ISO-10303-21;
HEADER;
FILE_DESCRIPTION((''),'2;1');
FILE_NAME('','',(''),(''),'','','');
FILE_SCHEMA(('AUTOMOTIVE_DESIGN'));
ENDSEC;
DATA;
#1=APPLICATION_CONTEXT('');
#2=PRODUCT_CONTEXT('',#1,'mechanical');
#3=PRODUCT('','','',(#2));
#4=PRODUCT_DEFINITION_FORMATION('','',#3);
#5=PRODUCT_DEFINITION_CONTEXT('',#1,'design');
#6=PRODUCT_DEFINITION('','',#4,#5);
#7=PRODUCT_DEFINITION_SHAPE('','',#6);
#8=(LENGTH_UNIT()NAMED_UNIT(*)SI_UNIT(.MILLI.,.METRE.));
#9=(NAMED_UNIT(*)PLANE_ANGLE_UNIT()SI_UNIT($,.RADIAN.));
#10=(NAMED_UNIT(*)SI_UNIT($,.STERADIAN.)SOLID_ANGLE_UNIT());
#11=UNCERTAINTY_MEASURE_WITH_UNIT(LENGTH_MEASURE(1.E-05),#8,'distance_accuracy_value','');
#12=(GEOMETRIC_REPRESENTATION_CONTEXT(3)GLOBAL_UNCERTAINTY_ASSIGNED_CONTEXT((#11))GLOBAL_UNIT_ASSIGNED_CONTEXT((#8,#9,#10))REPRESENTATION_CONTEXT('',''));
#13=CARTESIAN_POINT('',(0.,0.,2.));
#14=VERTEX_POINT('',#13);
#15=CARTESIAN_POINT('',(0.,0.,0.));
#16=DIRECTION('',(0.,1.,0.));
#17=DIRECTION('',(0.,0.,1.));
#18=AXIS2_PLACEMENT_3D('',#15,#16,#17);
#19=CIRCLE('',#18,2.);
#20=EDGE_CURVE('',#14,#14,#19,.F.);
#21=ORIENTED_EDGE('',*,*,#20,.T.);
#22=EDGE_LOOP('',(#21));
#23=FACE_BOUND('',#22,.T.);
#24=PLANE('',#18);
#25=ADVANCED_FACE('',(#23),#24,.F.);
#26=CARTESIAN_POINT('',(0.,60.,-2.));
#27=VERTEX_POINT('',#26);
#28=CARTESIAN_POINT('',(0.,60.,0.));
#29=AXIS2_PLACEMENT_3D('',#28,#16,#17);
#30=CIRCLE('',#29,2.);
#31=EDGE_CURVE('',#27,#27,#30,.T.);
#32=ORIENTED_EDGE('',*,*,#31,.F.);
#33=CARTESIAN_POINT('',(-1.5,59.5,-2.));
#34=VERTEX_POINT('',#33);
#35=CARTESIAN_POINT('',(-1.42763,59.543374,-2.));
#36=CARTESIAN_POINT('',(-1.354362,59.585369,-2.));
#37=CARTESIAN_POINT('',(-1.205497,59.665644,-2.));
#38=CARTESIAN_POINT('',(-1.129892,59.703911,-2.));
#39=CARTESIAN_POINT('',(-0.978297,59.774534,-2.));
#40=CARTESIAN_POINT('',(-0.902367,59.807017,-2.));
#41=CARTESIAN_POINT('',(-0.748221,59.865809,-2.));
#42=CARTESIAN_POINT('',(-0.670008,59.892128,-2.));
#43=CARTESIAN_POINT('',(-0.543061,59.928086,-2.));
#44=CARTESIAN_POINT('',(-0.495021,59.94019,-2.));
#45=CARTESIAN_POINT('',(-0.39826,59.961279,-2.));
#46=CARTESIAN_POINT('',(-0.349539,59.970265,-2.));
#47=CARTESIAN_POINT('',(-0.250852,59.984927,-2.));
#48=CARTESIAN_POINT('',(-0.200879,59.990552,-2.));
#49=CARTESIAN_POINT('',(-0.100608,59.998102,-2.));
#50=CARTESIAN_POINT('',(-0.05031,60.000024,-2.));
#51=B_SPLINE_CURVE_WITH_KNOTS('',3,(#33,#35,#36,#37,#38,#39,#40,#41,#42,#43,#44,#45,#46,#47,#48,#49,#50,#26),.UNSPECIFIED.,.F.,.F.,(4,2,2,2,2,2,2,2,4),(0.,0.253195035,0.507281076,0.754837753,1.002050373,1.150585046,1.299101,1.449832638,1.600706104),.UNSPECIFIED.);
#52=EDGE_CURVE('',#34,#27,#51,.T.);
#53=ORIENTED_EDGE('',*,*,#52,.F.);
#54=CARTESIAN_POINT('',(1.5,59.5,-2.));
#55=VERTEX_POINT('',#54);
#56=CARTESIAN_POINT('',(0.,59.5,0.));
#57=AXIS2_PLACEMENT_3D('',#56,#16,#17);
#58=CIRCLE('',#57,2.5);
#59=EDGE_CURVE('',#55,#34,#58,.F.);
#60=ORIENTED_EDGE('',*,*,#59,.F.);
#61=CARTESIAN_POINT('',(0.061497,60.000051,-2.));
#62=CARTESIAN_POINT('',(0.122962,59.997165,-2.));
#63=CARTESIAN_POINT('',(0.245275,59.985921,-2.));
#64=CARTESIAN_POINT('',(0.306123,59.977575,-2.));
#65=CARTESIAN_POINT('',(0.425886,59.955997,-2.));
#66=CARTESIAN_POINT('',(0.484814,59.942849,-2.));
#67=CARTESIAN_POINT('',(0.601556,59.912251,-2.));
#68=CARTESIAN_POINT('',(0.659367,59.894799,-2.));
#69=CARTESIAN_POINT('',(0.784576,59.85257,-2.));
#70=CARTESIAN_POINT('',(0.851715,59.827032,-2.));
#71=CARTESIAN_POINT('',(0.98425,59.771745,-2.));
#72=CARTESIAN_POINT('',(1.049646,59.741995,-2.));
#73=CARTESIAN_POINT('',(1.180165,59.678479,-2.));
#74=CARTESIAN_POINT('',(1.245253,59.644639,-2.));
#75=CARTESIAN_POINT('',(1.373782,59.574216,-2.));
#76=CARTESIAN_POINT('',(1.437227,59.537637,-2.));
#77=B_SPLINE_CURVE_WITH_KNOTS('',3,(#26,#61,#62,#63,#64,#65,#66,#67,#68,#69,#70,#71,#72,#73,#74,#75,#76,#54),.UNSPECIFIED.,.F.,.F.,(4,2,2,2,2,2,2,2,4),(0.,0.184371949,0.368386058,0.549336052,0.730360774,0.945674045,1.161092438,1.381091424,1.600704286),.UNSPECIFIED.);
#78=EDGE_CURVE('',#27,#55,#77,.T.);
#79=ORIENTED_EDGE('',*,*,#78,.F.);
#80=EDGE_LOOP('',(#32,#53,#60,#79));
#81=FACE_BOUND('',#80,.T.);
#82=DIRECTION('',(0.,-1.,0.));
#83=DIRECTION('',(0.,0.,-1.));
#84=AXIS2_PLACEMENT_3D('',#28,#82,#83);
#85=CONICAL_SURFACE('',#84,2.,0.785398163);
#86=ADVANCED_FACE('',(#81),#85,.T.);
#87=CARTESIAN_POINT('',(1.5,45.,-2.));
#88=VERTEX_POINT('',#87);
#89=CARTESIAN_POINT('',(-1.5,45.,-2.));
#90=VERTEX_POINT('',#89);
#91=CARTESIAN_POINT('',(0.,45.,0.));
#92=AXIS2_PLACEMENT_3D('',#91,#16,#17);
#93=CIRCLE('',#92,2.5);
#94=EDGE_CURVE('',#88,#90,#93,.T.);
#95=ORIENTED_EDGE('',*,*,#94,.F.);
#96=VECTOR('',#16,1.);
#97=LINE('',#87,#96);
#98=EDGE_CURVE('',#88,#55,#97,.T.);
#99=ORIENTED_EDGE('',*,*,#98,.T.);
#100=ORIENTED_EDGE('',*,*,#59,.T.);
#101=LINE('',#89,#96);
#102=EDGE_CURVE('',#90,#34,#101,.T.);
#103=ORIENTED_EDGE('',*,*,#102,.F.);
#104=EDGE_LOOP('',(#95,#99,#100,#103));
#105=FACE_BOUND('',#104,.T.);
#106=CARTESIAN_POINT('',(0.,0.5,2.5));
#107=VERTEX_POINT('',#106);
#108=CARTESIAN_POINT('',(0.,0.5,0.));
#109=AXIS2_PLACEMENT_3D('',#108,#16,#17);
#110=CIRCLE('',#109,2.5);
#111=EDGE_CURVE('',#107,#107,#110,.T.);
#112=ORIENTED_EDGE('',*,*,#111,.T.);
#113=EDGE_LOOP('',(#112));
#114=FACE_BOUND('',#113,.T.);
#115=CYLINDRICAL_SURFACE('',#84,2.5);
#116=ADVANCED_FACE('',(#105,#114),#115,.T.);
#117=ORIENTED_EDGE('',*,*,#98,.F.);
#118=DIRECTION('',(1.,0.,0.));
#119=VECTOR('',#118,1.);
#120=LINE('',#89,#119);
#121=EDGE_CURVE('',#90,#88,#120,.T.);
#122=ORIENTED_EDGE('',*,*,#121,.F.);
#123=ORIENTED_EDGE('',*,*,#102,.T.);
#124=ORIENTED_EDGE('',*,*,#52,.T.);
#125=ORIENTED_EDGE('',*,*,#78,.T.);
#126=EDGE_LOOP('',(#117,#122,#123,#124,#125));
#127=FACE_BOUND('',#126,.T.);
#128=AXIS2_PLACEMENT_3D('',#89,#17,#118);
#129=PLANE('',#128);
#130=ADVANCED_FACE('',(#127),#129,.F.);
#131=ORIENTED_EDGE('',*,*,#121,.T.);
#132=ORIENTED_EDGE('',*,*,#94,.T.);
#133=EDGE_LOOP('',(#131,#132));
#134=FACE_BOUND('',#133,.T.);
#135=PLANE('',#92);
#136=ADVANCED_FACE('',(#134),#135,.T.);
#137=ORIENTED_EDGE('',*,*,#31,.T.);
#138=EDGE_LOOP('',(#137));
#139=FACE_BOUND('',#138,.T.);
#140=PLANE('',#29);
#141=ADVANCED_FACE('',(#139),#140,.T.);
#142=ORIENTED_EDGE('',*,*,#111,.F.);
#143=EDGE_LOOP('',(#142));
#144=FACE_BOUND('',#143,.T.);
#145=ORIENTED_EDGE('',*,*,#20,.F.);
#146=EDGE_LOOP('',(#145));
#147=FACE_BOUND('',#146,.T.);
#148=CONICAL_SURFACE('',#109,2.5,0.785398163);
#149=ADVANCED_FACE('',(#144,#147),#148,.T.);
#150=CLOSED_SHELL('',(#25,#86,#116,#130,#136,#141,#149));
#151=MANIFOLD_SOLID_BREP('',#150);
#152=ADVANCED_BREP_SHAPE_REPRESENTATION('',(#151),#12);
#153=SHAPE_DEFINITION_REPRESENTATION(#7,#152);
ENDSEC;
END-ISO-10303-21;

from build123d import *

# Parameters (mm, degrees)
SKETCH_1_R          = 2.5
EXTRUDE_1_DEPTH     = 60
CUT_EXTRUDE_START   = -15
CUT_EXTRUDE_1_DEPTH = 15
CHAMFER_1_SIZE      = 0.5


with BuildPart() as part:
    # Эскиз1 → Бобышка-Вытянуть1 (new body)
    with BuildSketch(Plane(origin=(0, 0, 0), x_dir=(1, 0, 0), z_dir=(0, 1, 0))):
        with Locations(Location((0, 0, 0), (0, 0, 270))):
            Circle(SKETCH_1_R)
    extrude(amount=EXTRUDE_1_DEPTH)

    # Эскиз2 → Вырез-Вытянуть1 (cut)
    with BuildSketch(Plane(origin=(0, 60, 0), x_dir=(1, 0, 0), z_dir=(0, 1, 0)).offset(CUT_EXTRUDE_START)):
        with BuildLine():
            Line((-1.5, 2), (1.5, 2))
            ThreePointArc((1.5, 2), (0, 2.5), (-1.5, 2))
        make_face()
    extrude(amount=CUT_EXTRUDE_1_DEPTH, mode=Mode.SUBTRACT)

    # Фаска1
    chamfer_1_edges = [part.edges().sort_by_distance(p)[0] for p in [
        (-2.371708245, 60, 0.790569415),
        (0, 0, -2.5),
    ]]
    chamfer(chamfer_1_edges, length=CHAMFER_1_SIZE - 0.0001)  # a hair under: the kernel refuses the full size


solid = part.part
